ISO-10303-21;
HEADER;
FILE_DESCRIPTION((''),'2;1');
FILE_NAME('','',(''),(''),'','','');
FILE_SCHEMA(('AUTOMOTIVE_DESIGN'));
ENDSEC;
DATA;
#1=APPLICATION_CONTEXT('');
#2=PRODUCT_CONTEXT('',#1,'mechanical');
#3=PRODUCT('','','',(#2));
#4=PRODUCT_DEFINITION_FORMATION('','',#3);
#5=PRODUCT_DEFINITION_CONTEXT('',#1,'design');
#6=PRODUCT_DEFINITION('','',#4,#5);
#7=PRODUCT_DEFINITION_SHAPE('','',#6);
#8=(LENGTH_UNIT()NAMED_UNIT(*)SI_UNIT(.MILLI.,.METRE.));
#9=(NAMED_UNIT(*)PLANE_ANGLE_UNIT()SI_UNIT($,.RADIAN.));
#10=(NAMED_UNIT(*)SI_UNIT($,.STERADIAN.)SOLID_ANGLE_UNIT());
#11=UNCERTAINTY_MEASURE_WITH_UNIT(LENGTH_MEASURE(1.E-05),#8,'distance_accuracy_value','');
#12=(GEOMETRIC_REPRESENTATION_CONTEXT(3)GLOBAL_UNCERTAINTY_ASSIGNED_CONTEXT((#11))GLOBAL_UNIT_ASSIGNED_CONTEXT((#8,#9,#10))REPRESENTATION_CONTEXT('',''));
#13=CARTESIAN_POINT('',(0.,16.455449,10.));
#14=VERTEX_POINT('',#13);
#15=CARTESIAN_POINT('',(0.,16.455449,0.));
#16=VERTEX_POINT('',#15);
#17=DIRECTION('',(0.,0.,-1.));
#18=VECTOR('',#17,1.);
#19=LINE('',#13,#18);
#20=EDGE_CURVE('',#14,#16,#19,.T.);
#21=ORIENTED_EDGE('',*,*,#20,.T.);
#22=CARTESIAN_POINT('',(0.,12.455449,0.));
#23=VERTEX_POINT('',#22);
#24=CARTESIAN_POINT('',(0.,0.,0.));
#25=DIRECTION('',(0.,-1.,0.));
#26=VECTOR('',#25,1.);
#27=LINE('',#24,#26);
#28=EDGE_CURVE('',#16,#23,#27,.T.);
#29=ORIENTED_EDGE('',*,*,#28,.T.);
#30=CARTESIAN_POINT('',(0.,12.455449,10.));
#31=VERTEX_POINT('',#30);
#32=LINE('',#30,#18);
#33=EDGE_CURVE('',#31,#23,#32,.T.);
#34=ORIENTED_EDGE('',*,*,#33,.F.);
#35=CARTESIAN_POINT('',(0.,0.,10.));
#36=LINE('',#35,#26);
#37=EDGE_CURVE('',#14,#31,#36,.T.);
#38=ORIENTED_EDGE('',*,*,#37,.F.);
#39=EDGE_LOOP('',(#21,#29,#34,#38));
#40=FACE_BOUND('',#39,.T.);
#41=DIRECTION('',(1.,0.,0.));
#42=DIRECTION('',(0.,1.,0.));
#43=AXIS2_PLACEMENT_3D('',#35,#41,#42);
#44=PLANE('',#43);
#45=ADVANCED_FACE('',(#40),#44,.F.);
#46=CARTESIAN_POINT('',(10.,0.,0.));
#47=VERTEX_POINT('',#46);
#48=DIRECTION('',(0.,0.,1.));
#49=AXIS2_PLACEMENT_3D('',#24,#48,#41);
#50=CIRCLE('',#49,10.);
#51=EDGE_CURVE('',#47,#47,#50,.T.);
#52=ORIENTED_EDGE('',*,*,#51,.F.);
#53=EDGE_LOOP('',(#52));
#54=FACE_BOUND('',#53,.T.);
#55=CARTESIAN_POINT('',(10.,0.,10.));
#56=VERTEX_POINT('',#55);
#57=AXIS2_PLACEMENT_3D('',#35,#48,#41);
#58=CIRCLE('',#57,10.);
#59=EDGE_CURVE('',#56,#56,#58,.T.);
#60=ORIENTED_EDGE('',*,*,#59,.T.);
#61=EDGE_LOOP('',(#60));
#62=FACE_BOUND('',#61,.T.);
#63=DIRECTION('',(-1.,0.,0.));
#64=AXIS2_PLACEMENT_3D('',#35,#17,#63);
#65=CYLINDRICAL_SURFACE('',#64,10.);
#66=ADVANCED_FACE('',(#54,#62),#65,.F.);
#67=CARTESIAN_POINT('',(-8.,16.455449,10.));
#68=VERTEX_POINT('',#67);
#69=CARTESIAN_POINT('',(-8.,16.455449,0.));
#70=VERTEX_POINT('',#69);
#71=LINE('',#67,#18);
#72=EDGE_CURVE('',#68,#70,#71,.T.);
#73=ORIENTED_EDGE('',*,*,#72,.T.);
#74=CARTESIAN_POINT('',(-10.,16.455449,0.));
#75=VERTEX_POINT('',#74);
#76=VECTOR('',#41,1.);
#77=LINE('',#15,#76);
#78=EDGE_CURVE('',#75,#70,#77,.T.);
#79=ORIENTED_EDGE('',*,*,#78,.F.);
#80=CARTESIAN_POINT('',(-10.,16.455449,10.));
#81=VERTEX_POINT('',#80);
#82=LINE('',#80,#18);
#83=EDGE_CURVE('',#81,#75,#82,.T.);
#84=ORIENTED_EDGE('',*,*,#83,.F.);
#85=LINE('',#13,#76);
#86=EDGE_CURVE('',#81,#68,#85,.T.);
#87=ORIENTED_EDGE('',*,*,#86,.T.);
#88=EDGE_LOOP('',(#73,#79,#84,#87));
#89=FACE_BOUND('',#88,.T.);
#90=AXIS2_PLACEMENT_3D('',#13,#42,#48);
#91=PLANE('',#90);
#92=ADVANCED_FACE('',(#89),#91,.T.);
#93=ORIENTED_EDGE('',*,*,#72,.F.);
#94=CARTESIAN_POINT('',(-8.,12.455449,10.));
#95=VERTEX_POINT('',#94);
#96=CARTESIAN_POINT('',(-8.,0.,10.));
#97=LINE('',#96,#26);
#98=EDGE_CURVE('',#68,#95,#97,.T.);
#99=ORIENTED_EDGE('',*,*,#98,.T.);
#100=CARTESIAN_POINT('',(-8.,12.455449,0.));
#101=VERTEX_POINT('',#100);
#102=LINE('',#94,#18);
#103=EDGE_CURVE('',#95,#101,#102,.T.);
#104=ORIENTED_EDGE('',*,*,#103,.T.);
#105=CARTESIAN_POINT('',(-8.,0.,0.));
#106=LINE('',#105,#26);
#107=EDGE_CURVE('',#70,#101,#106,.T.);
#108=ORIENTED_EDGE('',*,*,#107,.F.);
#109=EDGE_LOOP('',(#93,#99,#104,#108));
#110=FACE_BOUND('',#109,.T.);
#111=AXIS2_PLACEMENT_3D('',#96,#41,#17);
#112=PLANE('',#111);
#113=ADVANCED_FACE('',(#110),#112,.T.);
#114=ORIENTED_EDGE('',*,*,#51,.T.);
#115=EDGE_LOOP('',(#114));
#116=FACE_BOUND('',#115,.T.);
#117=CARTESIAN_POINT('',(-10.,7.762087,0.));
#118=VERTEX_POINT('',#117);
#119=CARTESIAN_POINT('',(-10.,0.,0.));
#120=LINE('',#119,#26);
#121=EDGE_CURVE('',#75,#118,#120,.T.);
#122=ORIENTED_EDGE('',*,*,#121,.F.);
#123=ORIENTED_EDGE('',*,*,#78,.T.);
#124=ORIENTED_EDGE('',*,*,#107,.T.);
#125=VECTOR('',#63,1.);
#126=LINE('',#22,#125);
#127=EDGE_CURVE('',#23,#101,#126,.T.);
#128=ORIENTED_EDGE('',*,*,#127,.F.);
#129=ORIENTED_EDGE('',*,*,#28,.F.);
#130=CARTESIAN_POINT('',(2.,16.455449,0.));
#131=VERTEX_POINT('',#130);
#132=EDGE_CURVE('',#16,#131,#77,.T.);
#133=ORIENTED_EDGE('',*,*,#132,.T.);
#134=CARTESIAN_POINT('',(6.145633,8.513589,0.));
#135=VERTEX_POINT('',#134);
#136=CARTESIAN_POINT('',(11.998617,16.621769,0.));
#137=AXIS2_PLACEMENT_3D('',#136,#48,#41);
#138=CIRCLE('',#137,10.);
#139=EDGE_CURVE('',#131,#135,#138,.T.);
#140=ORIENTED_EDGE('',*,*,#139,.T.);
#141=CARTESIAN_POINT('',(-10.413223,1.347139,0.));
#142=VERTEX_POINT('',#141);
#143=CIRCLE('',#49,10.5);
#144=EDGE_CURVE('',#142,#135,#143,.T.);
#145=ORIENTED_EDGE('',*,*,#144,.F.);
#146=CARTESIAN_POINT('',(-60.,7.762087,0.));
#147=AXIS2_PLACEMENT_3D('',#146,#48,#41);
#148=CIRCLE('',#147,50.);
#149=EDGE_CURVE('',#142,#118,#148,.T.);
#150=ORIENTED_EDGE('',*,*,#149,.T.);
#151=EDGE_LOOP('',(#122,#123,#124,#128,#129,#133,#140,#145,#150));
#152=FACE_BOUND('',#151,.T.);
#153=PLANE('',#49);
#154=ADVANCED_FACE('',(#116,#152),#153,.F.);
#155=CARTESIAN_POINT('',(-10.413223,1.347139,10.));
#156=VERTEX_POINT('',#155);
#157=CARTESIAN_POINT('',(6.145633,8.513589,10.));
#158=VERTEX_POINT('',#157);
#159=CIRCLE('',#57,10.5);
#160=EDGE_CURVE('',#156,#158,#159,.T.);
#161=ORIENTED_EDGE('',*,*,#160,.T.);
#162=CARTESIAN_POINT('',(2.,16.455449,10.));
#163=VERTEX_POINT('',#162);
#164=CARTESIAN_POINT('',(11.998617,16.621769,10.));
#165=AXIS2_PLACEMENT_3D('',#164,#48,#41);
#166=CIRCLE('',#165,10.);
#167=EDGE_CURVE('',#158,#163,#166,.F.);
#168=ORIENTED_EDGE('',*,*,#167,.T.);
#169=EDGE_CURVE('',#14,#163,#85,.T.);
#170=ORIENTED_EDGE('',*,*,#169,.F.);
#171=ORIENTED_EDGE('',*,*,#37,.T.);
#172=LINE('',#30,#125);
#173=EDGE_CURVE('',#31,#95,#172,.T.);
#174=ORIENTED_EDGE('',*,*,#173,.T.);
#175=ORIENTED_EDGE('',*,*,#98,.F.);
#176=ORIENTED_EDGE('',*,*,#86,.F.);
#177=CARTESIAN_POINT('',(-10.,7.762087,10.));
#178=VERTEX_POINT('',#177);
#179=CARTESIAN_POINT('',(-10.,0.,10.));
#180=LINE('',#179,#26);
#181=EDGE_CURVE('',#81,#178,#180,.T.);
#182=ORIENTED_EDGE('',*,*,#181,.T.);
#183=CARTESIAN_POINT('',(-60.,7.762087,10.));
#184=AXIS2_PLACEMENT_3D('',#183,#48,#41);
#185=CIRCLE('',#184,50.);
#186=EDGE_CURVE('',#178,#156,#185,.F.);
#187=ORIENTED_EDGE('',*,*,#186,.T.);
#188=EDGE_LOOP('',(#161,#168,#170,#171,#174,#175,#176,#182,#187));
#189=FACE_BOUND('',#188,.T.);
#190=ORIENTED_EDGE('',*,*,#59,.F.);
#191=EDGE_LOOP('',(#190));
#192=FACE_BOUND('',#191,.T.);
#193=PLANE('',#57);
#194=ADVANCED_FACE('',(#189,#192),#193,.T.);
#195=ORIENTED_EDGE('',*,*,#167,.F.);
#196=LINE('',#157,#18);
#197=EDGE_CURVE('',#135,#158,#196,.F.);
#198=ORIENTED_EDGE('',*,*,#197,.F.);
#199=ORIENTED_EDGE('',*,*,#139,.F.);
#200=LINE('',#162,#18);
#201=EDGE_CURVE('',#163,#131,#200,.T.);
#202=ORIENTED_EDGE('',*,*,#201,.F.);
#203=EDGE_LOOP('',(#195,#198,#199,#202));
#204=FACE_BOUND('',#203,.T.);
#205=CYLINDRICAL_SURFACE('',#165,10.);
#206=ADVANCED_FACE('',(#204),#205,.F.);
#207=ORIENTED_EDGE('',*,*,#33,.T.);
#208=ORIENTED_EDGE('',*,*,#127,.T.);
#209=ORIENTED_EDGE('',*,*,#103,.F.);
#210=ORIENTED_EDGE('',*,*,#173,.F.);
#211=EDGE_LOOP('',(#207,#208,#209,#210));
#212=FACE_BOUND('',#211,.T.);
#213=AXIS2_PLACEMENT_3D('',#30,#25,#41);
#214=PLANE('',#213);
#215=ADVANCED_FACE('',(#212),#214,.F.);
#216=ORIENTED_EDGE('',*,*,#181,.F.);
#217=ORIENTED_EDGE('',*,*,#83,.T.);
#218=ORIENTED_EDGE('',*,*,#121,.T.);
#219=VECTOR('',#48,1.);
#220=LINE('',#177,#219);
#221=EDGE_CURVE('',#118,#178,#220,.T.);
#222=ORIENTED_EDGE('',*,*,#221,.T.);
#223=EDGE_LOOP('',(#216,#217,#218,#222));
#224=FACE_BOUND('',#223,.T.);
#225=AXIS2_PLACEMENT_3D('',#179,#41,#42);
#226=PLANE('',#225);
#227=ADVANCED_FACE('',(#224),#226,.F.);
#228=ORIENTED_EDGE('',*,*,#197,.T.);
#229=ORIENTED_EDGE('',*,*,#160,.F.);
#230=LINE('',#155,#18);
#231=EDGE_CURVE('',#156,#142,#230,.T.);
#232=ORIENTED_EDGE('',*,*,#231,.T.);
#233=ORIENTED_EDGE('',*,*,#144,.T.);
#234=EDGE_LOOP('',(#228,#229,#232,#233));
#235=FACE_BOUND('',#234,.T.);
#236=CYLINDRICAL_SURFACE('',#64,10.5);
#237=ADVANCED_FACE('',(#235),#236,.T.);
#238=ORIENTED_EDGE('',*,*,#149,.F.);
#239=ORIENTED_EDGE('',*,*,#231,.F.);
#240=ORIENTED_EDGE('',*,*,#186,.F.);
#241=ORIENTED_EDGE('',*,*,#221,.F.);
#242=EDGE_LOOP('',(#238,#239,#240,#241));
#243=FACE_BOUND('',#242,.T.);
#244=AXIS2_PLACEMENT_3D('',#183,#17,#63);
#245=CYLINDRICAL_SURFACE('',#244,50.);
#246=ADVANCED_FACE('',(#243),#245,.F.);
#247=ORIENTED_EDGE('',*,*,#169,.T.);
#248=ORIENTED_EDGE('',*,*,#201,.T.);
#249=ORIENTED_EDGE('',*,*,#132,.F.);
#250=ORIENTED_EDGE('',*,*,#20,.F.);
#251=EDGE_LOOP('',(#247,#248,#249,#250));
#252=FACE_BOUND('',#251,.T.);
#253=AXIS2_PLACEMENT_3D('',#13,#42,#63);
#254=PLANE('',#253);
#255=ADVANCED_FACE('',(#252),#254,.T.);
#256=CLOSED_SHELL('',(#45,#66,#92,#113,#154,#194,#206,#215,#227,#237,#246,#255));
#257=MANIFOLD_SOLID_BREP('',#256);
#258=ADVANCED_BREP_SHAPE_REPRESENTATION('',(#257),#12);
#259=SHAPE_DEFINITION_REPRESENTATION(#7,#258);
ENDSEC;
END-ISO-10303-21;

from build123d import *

# Parameters (mm, degrees)
SKETCH1_R           = 10.5
SKETCH1_R_2         = 10
BOSS_EXTRUDE1_DEPTH = 10
FILLET1_R           = 50
FILLET2_R           = 10


with BuildPart() as part:
    # Sketch1 → Boss-Extrude1 (new body)
    # profile 1 of 2: a face of its own
    with BuildSketch(Plane.XY):
        with BuildLine():
            Line((-8, 16.455448816), (-10, 16.455448816))
            Line((-10, 16.455448816), (-10, 3.201562119))
            ThreePointArc((-10, 3.201562119), (-5.350189391, 9.034681703), (2, 10.307764064))
            Line((2, 10.307764064), (2, 16.455448816))
            Line((2, 16.455448816), (0, 16.455448816))
            Line((0, 16.455448816), (0, 12.455448816))
            Line((0, 12.455448816), (-8, 12.455448816))
            Line((-8, 12.455448816), (-8, 16.455448816))
        make_face()
    # profile 2 of 2: a face of its own
    with BuildSketch(Plane.XY):
        Circle(SKETCH1_R)
        Circle(SKETCH1_R_2, mode=Mode.SUBTRACT)
    extrude(amount=BOSS_EXTRUDE1_DEPTH)

    # Fillet1
    fillet1_edges = [part.edges().sort_by_distance(p)[0] for p in [
        (-10, 3.201562119, 5),
    ]]
    fillet(fillet1_edges, radius=FILLET1_R)

    # Fillet2
    # the kernel refuses this fillet: 10 mm, written as the material it adds along each edge
    with BuildSketch(Plane(origin=(2, 10.307764064, 0), x_dir=(0.9177385180752605, -0.3971851110515409, 0), z_dir=(0, 0, 1))) as fillet2_piece_1:
        with BuildLine():
            CenterArc((6.668287117, 9.765906989), FILLET2_R, 204.355310462, 53.22294126)
            Line((-2.441768851, 5.641967094), (-2.62396997, 5.559488296))
            ThreePointArc((-2.62396997, 5.559488296), (-1.404432129, 2.741546525), (-0.183547704, -0.079437022))
            Line((-0.183547704, -0.079437022), (0.043021207, -0.19531814))
            ThreePointArc((0.043021207, -0.19531814), (2.258613378, 0.045797661), (4.474205549, -0.19531814))
            Line((4.474205549, -0.19531814), (4.517226757, 0))
        make_face()
    extrude(amount=10)


solid = part.part
